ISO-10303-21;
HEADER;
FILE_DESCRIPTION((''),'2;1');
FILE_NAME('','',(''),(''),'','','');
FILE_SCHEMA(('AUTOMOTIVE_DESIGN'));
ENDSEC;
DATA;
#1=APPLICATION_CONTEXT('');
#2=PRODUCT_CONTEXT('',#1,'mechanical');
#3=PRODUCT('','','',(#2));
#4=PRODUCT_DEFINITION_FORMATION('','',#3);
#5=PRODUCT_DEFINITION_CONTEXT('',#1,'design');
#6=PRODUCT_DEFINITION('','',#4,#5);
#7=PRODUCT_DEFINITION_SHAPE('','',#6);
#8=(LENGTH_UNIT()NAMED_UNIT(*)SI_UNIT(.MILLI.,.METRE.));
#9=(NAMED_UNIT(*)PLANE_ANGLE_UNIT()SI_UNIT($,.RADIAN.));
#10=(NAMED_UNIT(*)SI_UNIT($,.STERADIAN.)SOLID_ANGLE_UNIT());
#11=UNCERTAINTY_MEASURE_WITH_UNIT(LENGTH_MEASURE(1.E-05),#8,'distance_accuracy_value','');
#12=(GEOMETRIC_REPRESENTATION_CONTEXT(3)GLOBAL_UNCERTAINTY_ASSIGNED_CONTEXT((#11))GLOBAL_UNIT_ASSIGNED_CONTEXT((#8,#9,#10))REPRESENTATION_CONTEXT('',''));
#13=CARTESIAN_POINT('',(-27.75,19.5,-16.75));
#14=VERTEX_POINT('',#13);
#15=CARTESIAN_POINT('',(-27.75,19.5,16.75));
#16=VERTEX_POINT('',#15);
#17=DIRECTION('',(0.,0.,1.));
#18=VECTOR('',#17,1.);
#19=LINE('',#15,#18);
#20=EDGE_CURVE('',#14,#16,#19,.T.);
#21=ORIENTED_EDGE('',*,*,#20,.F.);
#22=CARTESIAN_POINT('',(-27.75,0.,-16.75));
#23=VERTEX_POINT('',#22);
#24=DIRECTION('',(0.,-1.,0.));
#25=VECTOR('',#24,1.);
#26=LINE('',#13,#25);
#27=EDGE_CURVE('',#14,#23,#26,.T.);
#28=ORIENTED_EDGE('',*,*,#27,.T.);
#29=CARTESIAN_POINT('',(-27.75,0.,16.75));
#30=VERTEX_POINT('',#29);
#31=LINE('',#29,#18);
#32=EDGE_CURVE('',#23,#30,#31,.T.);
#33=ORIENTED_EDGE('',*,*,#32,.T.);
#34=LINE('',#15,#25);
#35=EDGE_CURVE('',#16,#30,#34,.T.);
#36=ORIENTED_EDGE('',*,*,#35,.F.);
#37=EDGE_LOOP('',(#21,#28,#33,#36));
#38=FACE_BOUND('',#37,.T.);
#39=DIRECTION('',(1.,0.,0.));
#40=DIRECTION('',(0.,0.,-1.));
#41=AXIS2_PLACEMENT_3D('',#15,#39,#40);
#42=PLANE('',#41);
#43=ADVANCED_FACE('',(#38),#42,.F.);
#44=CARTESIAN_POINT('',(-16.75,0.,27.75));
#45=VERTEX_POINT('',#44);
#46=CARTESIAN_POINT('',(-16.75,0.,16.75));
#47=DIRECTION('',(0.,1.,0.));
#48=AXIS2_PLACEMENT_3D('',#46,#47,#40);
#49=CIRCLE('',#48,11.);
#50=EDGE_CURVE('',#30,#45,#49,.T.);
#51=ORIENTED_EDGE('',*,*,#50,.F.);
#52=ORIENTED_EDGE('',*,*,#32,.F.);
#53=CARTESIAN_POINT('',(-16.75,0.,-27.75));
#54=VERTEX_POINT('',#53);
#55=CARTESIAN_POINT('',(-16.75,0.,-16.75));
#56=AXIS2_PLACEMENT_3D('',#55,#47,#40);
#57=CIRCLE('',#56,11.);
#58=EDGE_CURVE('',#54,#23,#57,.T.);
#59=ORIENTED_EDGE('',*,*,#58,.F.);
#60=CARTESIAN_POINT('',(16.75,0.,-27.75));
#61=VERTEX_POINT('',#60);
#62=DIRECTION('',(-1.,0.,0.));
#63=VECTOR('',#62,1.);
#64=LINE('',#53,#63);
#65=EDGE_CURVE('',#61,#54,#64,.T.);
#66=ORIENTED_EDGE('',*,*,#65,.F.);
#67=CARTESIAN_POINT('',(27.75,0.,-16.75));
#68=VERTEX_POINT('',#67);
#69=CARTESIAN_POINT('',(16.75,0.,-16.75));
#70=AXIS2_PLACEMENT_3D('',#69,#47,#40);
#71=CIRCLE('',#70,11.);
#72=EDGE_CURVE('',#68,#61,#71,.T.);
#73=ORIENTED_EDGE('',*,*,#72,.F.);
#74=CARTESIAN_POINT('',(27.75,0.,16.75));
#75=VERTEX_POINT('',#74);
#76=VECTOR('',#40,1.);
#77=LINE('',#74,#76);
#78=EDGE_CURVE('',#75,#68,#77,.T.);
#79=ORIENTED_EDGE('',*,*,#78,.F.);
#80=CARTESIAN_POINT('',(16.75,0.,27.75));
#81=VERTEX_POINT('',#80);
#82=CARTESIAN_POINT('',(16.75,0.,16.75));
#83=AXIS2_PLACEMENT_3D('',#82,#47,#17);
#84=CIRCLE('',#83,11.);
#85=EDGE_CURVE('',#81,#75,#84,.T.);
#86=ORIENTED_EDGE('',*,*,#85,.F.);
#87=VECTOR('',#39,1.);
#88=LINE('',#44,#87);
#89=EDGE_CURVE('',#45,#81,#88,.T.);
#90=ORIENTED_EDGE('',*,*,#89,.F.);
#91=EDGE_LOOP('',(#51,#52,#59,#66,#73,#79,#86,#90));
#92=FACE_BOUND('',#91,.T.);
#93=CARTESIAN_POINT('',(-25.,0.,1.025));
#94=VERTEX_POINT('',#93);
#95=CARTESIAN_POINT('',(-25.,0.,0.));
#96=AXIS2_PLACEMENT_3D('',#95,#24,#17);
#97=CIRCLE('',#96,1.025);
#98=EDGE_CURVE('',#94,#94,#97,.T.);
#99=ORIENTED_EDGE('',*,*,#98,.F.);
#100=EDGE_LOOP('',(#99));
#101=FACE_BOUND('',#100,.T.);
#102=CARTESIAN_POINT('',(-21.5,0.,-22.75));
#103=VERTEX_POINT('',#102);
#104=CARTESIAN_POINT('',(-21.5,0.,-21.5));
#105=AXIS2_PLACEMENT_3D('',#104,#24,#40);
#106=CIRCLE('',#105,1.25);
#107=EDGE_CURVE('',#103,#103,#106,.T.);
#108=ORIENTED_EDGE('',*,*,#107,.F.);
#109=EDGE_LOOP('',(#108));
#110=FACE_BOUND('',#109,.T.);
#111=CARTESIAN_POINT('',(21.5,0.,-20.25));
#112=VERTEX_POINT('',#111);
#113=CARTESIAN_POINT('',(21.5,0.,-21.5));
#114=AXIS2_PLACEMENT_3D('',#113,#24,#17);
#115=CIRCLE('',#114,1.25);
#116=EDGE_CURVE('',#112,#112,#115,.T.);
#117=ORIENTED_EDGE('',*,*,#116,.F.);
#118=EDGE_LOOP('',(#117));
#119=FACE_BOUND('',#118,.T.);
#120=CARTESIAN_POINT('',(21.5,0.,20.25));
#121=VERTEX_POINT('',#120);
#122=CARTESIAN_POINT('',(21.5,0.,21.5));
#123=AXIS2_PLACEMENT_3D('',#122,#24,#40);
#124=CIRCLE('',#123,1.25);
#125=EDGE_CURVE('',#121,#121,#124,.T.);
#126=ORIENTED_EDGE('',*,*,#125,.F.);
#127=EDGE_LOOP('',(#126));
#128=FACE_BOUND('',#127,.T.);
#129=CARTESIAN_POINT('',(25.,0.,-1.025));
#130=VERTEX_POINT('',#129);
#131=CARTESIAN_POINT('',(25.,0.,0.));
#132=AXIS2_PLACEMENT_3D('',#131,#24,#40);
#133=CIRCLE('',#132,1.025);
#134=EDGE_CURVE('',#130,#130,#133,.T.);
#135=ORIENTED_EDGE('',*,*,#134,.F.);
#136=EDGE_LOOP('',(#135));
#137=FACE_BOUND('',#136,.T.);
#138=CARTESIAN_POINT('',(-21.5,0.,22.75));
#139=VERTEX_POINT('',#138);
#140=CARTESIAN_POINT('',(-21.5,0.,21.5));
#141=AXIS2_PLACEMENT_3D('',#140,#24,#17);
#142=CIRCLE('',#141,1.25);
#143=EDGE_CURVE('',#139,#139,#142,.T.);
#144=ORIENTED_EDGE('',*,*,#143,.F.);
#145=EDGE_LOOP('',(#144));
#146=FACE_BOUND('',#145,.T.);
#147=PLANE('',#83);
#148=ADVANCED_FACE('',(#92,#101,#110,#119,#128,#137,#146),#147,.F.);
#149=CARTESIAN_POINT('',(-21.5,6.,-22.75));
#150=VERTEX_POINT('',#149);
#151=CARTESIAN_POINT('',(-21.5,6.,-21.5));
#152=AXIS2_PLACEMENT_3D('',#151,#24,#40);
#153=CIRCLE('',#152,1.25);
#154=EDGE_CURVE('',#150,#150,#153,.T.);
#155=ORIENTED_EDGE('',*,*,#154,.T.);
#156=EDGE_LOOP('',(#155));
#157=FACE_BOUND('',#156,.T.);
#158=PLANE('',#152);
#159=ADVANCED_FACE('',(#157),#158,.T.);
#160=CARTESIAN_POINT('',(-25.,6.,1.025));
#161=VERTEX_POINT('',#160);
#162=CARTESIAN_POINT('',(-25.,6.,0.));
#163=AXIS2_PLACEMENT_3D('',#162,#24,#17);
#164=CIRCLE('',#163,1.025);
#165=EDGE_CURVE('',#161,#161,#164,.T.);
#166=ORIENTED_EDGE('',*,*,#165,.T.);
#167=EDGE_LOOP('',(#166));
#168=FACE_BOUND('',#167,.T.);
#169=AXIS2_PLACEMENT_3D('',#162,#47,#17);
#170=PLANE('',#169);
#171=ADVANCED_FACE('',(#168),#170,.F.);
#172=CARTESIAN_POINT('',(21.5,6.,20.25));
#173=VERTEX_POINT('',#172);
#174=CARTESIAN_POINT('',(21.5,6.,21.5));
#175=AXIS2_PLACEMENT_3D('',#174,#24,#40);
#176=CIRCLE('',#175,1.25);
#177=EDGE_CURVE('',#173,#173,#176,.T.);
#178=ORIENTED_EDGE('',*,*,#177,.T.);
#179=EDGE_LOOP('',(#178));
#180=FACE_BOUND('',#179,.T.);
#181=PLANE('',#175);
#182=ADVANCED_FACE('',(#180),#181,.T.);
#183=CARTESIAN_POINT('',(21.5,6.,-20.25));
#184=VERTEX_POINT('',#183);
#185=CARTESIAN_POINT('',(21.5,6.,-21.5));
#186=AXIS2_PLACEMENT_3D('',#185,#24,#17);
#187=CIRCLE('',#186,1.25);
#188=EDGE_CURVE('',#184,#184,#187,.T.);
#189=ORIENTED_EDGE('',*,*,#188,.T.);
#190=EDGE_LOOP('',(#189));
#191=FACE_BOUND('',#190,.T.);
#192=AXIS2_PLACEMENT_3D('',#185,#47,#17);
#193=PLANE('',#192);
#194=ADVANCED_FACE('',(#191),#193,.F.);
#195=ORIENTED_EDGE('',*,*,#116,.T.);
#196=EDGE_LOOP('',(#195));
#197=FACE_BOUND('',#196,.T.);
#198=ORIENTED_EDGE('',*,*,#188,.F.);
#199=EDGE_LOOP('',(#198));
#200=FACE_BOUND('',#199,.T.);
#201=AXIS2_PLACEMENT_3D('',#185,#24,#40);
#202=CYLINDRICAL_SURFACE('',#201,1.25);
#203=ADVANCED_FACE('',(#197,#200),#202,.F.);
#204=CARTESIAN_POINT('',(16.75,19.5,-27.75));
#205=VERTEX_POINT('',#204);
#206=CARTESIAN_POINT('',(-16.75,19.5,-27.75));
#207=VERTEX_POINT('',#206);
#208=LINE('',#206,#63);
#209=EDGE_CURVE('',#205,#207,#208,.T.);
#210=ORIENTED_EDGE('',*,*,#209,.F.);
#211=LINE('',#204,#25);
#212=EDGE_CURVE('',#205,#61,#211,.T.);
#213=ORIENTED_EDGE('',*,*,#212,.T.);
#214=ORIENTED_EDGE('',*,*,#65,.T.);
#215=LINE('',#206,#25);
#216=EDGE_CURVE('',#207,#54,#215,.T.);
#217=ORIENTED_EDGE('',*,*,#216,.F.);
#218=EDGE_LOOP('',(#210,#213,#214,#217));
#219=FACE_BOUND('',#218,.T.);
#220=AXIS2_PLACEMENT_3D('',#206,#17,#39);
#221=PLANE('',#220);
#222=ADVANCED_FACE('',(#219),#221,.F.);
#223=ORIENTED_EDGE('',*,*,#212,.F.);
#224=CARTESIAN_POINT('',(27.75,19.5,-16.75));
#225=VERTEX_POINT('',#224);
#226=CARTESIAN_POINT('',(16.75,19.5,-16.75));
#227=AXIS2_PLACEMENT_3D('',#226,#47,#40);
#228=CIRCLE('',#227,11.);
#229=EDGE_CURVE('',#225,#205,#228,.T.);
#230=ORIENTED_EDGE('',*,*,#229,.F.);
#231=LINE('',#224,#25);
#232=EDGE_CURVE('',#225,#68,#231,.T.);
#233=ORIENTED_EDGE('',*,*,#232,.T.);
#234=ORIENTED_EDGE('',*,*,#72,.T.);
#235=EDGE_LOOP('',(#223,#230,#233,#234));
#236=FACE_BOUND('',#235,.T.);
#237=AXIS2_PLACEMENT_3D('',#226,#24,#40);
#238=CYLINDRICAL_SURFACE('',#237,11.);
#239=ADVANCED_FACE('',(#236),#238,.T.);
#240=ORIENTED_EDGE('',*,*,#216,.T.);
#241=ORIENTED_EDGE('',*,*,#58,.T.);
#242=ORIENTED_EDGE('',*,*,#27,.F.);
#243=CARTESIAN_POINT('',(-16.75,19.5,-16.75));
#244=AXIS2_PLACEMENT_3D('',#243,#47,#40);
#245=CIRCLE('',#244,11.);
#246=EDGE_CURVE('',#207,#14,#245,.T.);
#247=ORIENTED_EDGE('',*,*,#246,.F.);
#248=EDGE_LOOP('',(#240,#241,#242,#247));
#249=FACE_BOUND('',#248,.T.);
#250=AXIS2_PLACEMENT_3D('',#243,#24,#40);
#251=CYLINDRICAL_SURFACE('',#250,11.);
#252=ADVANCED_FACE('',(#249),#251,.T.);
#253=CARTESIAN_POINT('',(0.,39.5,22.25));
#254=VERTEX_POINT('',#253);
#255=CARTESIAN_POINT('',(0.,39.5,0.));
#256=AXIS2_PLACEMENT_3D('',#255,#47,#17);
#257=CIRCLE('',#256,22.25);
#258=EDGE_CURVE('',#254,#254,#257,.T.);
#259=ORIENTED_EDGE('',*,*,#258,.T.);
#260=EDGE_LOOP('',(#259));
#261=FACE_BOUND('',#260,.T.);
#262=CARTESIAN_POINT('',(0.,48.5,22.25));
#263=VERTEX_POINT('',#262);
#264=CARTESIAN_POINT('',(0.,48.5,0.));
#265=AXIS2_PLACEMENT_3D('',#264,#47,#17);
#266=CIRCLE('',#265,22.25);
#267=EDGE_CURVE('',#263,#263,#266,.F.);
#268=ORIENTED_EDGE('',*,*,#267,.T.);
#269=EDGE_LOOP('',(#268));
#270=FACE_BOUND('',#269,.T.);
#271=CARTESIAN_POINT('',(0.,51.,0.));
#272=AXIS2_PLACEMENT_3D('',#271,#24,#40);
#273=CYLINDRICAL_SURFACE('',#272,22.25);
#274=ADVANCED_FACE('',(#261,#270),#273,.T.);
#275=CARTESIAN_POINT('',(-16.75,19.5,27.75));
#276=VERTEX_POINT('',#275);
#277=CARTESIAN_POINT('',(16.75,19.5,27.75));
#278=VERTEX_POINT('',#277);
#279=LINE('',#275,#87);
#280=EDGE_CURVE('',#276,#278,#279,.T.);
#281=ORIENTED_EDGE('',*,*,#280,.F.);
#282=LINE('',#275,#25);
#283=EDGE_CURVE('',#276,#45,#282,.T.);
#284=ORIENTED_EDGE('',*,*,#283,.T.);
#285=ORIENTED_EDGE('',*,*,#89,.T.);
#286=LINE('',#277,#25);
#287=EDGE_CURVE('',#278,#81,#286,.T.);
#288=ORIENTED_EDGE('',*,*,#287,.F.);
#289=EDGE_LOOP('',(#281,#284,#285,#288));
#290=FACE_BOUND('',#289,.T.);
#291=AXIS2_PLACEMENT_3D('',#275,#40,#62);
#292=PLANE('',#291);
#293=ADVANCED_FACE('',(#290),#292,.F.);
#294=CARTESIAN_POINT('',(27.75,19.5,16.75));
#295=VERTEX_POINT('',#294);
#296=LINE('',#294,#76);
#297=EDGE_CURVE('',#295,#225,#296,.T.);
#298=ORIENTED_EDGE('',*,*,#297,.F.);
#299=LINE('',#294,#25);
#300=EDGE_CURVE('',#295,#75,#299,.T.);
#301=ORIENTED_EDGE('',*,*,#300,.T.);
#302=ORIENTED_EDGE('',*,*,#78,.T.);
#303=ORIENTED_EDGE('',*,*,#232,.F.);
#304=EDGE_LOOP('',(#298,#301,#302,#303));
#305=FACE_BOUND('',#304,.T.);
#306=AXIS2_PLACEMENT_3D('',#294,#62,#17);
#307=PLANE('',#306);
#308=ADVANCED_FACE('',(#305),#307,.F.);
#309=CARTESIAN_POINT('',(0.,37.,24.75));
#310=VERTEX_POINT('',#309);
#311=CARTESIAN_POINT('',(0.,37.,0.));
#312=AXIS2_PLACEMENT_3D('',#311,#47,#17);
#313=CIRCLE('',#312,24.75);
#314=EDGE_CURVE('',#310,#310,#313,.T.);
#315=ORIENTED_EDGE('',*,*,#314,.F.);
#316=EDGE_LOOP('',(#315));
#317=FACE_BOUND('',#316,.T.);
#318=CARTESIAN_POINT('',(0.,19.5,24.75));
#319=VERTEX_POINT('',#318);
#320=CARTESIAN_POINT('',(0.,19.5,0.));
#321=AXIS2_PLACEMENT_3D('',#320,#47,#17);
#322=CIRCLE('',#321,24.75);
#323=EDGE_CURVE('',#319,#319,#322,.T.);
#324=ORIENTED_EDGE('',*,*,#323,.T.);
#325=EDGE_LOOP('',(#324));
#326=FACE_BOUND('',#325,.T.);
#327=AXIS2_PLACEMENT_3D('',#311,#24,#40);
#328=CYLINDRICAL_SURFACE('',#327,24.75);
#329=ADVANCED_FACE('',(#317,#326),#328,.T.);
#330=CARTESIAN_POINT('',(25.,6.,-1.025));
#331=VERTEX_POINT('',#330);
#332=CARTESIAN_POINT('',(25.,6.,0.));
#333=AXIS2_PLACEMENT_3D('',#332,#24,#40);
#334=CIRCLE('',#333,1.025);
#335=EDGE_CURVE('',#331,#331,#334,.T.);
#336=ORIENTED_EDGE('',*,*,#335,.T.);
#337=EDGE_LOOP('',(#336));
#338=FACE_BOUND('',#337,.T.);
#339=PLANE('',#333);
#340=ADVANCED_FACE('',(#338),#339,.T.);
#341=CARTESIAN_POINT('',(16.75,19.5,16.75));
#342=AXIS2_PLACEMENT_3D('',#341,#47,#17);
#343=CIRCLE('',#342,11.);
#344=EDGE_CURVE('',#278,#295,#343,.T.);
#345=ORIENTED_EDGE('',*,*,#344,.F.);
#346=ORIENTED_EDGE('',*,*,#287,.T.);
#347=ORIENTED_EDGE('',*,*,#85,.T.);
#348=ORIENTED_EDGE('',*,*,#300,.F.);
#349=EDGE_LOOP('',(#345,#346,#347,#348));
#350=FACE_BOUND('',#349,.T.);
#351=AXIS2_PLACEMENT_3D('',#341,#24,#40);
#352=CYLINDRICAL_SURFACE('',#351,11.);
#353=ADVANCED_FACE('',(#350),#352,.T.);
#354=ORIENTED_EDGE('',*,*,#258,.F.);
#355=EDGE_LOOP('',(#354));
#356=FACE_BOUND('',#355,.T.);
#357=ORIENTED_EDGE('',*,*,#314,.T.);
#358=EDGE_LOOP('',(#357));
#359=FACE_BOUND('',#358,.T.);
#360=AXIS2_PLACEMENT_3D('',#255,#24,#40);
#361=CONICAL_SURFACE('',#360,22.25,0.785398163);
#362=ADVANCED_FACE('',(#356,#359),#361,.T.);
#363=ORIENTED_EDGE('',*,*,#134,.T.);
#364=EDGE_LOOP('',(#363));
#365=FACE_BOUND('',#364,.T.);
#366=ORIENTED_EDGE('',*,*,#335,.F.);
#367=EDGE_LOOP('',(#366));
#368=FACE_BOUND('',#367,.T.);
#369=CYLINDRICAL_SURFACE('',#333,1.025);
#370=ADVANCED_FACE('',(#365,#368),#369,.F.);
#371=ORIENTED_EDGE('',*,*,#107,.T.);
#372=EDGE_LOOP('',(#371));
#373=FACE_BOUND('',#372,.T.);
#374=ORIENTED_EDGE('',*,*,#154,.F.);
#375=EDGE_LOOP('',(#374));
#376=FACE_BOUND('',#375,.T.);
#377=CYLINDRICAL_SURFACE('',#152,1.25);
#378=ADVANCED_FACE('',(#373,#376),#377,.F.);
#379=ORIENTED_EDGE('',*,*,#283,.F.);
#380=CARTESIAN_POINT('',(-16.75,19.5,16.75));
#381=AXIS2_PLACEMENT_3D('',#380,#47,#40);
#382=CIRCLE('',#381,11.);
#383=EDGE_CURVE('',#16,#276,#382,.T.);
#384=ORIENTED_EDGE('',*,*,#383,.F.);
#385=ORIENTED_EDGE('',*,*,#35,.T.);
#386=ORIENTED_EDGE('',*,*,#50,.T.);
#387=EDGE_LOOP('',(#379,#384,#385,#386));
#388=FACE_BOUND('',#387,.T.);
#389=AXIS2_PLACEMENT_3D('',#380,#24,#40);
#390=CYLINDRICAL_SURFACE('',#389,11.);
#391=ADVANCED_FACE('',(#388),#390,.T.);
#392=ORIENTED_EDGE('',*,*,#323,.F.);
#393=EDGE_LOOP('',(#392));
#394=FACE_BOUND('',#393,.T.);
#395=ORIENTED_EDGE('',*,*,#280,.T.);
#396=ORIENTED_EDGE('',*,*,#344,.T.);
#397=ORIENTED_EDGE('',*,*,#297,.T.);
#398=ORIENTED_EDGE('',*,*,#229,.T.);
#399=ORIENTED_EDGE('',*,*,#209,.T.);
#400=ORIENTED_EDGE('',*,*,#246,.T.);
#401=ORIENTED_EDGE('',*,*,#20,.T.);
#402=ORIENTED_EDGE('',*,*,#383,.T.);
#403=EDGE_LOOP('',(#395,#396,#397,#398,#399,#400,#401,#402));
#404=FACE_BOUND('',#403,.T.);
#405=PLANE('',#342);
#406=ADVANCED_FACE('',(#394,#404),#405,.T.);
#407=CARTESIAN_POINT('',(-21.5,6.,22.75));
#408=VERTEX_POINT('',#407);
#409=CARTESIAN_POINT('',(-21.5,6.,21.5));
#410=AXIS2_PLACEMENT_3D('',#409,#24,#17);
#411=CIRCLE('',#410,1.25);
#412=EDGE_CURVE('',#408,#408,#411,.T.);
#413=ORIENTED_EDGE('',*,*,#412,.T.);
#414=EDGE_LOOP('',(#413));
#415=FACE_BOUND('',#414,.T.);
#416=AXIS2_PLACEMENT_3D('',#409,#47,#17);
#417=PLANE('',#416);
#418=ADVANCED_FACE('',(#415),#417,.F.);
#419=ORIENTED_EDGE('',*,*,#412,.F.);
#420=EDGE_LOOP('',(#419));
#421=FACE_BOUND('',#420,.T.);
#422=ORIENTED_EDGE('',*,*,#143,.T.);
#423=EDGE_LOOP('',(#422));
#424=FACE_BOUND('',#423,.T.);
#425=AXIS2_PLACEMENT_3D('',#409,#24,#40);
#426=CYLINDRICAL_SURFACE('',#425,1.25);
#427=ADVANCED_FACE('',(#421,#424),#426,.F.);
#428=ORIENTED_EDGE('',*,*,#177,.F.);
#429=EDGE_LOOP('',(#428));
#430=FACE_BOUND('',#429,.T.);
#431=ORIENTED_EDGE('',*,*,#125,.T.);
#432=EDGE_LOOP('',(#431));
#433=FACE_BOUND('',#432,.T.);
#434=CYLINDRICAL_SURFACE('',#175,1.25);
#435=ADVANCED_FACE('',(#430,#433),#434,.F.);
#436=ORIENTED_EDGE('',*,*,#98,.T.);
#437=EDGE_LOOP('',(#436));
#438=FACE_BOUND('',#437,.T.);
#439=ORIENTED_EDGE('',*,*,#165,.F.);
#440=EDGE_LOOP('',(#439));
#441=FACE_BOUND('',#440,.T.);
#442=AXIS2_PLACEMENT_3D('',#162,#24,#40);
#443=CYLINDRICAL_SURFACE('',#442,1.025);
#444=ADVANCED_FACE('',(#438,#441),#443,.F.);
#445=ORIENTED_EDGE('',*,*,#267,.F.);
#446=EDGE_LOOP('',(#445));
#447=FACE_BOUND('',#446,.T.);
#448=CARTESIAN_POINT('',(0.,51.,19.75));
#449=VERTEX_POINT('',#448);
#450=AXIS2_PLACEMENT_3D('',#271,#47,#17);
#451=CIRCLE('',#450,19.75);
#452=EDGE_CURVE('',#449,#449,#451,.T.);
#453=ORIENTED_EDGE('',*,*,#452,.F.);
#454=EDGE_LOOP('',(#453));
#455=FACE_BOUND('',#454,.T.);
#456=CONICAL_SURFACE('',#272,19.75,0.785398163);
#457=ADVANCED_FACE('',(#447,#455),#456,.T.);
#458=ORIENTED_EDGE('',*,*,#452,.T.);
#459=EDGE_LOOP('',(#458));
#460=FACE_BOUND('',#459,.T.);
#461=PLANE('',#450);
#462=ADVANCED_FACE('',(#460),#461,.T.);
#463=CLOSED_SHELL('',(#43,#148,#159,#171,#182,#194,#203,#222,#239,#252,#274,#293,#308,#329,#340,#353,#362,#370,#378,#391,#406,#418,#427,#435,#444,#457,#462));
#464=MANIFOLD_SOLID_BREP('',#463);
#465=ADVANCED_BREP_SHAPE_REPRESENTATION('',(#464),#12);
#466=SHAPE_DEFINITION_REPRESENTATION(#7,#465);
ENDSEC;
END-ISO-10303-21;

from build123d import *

# Parameters (mm, degrees)
BOSS_EXTRUDE1_DEPTH = 19.5
SKETCH2_R           = 24.75
BOSS_EXTRUDE2_DEPTH = 17.5
SKETCH3_R           = 22.25
BOSS_EXTRUDE3_DEPTH = 14
FILLET1_SIZE        = 2.5
SKETCH4_R           = 1.25
SKETCH4_R_2         = 1.025
CUT_EXTRUDE1_DEPTH  = 6


with BuildPart() as part:
    # Sketch1 → Boss-Extrude1 (new body)
    with BuildSketch(Plane(origin=(0, 0, 0), x_dir=(1, 0, 0), z_dir=(0, 1, 0))):
        with BuildLine():
            Line((-16.75, -27.75), (16.75, -27.75))
            ThreePointArc((16.75, -27.75), (24.528174593, -24.528174593), (27.75, -16.75))
            Line((27.75, -16.75), (27.75, 16.75))
            ThreePointArc((27.75, 16.75), (24.528174593, 24.528174593), (16.75, 27.75))
            Line((16.75, 27.75), (-16.75, 27.75))
            ThreePointArc((-16.75, 27.75), (-24.528174593, 24.528174593), (-27.75, 16.75))
            Line((-27.75, 16.75), (-27.75, -16.75))
            ThreePointArc((-27.75, -16.75), (-24.528174593, -24.528174593), (-16.75, -27.75))
        make_face()
    extrude(amount=BOSS_EXTRUDE1_DEPTH)

    # Sketch2 → Boss-Extrude2 (add)
    with BuildSketch(Plane(origin=(0, 19.5, 0), x_dir=(1, 0, 0), z_dir=(0, 1, 0))):
        with Locations(Location((0, 0, 0), (0, 0, 270))):
            Circle(SKETCH2_R)
    extrude(amount=BOSS_EXTRUDE2_DEPTH)

    # Sketch3 → Boss-Extrude3 (add)
    with BuildSketch(Plane(origin=(0, 37, 0), x_dir=(1, 0, 0), z_dir=(0, 1, 0))):
        with Locations(Location((0, 0, 0), (0, 0, 270))):
            Circle(SKETCH3_R)
    extrude(amount=BOSS_EXTRUDE3_DEPTH)

    # Fillet1
    fillet1_edges = [part.edges().sort_by_distance(p)[0] for p in [
        (0, 37, -22.25),
        (0, 51, -22.25),
    ]]
    chamfer(fillet1_edges, length=FILLET1_SIZE - 0.0001)  # a hair under: the kernel refuses the full size

    # Sketch4 → Cut-Extrude1 (cut)
    with BuildSketch(Plane.XZ):
        with Locations(Location((21.5, 21.5, 0), (0, 0, 270))):
            Circle(SKETCH4_R)
        with Locations(Location((25, 0, 0), (0, 0, 270))):
            Circle(SKETCH4_R_2)
        with Locations(Location((21.5, -21.5, 0), (0, 0, 90))):
            Circle(SKETCH4_R)
        with Locations(Location((-21.5, -21.5, 0), (0, 0, 270))):
            Circle(SKETCH4_R)
        with Locations(Location((-25, 0, 0), (0, 0, 90))):
            Circle(SKETCH4_R_2)
        with Locations(Location((-21.5, 21.5, 0), (0, 0, 90))):
            Circle(SKETCH4_R)
    extrude(amount=-CUT_EXTRUDE1_DEPTH, mode=Mode.SUBTRACT)


solid = part.part
